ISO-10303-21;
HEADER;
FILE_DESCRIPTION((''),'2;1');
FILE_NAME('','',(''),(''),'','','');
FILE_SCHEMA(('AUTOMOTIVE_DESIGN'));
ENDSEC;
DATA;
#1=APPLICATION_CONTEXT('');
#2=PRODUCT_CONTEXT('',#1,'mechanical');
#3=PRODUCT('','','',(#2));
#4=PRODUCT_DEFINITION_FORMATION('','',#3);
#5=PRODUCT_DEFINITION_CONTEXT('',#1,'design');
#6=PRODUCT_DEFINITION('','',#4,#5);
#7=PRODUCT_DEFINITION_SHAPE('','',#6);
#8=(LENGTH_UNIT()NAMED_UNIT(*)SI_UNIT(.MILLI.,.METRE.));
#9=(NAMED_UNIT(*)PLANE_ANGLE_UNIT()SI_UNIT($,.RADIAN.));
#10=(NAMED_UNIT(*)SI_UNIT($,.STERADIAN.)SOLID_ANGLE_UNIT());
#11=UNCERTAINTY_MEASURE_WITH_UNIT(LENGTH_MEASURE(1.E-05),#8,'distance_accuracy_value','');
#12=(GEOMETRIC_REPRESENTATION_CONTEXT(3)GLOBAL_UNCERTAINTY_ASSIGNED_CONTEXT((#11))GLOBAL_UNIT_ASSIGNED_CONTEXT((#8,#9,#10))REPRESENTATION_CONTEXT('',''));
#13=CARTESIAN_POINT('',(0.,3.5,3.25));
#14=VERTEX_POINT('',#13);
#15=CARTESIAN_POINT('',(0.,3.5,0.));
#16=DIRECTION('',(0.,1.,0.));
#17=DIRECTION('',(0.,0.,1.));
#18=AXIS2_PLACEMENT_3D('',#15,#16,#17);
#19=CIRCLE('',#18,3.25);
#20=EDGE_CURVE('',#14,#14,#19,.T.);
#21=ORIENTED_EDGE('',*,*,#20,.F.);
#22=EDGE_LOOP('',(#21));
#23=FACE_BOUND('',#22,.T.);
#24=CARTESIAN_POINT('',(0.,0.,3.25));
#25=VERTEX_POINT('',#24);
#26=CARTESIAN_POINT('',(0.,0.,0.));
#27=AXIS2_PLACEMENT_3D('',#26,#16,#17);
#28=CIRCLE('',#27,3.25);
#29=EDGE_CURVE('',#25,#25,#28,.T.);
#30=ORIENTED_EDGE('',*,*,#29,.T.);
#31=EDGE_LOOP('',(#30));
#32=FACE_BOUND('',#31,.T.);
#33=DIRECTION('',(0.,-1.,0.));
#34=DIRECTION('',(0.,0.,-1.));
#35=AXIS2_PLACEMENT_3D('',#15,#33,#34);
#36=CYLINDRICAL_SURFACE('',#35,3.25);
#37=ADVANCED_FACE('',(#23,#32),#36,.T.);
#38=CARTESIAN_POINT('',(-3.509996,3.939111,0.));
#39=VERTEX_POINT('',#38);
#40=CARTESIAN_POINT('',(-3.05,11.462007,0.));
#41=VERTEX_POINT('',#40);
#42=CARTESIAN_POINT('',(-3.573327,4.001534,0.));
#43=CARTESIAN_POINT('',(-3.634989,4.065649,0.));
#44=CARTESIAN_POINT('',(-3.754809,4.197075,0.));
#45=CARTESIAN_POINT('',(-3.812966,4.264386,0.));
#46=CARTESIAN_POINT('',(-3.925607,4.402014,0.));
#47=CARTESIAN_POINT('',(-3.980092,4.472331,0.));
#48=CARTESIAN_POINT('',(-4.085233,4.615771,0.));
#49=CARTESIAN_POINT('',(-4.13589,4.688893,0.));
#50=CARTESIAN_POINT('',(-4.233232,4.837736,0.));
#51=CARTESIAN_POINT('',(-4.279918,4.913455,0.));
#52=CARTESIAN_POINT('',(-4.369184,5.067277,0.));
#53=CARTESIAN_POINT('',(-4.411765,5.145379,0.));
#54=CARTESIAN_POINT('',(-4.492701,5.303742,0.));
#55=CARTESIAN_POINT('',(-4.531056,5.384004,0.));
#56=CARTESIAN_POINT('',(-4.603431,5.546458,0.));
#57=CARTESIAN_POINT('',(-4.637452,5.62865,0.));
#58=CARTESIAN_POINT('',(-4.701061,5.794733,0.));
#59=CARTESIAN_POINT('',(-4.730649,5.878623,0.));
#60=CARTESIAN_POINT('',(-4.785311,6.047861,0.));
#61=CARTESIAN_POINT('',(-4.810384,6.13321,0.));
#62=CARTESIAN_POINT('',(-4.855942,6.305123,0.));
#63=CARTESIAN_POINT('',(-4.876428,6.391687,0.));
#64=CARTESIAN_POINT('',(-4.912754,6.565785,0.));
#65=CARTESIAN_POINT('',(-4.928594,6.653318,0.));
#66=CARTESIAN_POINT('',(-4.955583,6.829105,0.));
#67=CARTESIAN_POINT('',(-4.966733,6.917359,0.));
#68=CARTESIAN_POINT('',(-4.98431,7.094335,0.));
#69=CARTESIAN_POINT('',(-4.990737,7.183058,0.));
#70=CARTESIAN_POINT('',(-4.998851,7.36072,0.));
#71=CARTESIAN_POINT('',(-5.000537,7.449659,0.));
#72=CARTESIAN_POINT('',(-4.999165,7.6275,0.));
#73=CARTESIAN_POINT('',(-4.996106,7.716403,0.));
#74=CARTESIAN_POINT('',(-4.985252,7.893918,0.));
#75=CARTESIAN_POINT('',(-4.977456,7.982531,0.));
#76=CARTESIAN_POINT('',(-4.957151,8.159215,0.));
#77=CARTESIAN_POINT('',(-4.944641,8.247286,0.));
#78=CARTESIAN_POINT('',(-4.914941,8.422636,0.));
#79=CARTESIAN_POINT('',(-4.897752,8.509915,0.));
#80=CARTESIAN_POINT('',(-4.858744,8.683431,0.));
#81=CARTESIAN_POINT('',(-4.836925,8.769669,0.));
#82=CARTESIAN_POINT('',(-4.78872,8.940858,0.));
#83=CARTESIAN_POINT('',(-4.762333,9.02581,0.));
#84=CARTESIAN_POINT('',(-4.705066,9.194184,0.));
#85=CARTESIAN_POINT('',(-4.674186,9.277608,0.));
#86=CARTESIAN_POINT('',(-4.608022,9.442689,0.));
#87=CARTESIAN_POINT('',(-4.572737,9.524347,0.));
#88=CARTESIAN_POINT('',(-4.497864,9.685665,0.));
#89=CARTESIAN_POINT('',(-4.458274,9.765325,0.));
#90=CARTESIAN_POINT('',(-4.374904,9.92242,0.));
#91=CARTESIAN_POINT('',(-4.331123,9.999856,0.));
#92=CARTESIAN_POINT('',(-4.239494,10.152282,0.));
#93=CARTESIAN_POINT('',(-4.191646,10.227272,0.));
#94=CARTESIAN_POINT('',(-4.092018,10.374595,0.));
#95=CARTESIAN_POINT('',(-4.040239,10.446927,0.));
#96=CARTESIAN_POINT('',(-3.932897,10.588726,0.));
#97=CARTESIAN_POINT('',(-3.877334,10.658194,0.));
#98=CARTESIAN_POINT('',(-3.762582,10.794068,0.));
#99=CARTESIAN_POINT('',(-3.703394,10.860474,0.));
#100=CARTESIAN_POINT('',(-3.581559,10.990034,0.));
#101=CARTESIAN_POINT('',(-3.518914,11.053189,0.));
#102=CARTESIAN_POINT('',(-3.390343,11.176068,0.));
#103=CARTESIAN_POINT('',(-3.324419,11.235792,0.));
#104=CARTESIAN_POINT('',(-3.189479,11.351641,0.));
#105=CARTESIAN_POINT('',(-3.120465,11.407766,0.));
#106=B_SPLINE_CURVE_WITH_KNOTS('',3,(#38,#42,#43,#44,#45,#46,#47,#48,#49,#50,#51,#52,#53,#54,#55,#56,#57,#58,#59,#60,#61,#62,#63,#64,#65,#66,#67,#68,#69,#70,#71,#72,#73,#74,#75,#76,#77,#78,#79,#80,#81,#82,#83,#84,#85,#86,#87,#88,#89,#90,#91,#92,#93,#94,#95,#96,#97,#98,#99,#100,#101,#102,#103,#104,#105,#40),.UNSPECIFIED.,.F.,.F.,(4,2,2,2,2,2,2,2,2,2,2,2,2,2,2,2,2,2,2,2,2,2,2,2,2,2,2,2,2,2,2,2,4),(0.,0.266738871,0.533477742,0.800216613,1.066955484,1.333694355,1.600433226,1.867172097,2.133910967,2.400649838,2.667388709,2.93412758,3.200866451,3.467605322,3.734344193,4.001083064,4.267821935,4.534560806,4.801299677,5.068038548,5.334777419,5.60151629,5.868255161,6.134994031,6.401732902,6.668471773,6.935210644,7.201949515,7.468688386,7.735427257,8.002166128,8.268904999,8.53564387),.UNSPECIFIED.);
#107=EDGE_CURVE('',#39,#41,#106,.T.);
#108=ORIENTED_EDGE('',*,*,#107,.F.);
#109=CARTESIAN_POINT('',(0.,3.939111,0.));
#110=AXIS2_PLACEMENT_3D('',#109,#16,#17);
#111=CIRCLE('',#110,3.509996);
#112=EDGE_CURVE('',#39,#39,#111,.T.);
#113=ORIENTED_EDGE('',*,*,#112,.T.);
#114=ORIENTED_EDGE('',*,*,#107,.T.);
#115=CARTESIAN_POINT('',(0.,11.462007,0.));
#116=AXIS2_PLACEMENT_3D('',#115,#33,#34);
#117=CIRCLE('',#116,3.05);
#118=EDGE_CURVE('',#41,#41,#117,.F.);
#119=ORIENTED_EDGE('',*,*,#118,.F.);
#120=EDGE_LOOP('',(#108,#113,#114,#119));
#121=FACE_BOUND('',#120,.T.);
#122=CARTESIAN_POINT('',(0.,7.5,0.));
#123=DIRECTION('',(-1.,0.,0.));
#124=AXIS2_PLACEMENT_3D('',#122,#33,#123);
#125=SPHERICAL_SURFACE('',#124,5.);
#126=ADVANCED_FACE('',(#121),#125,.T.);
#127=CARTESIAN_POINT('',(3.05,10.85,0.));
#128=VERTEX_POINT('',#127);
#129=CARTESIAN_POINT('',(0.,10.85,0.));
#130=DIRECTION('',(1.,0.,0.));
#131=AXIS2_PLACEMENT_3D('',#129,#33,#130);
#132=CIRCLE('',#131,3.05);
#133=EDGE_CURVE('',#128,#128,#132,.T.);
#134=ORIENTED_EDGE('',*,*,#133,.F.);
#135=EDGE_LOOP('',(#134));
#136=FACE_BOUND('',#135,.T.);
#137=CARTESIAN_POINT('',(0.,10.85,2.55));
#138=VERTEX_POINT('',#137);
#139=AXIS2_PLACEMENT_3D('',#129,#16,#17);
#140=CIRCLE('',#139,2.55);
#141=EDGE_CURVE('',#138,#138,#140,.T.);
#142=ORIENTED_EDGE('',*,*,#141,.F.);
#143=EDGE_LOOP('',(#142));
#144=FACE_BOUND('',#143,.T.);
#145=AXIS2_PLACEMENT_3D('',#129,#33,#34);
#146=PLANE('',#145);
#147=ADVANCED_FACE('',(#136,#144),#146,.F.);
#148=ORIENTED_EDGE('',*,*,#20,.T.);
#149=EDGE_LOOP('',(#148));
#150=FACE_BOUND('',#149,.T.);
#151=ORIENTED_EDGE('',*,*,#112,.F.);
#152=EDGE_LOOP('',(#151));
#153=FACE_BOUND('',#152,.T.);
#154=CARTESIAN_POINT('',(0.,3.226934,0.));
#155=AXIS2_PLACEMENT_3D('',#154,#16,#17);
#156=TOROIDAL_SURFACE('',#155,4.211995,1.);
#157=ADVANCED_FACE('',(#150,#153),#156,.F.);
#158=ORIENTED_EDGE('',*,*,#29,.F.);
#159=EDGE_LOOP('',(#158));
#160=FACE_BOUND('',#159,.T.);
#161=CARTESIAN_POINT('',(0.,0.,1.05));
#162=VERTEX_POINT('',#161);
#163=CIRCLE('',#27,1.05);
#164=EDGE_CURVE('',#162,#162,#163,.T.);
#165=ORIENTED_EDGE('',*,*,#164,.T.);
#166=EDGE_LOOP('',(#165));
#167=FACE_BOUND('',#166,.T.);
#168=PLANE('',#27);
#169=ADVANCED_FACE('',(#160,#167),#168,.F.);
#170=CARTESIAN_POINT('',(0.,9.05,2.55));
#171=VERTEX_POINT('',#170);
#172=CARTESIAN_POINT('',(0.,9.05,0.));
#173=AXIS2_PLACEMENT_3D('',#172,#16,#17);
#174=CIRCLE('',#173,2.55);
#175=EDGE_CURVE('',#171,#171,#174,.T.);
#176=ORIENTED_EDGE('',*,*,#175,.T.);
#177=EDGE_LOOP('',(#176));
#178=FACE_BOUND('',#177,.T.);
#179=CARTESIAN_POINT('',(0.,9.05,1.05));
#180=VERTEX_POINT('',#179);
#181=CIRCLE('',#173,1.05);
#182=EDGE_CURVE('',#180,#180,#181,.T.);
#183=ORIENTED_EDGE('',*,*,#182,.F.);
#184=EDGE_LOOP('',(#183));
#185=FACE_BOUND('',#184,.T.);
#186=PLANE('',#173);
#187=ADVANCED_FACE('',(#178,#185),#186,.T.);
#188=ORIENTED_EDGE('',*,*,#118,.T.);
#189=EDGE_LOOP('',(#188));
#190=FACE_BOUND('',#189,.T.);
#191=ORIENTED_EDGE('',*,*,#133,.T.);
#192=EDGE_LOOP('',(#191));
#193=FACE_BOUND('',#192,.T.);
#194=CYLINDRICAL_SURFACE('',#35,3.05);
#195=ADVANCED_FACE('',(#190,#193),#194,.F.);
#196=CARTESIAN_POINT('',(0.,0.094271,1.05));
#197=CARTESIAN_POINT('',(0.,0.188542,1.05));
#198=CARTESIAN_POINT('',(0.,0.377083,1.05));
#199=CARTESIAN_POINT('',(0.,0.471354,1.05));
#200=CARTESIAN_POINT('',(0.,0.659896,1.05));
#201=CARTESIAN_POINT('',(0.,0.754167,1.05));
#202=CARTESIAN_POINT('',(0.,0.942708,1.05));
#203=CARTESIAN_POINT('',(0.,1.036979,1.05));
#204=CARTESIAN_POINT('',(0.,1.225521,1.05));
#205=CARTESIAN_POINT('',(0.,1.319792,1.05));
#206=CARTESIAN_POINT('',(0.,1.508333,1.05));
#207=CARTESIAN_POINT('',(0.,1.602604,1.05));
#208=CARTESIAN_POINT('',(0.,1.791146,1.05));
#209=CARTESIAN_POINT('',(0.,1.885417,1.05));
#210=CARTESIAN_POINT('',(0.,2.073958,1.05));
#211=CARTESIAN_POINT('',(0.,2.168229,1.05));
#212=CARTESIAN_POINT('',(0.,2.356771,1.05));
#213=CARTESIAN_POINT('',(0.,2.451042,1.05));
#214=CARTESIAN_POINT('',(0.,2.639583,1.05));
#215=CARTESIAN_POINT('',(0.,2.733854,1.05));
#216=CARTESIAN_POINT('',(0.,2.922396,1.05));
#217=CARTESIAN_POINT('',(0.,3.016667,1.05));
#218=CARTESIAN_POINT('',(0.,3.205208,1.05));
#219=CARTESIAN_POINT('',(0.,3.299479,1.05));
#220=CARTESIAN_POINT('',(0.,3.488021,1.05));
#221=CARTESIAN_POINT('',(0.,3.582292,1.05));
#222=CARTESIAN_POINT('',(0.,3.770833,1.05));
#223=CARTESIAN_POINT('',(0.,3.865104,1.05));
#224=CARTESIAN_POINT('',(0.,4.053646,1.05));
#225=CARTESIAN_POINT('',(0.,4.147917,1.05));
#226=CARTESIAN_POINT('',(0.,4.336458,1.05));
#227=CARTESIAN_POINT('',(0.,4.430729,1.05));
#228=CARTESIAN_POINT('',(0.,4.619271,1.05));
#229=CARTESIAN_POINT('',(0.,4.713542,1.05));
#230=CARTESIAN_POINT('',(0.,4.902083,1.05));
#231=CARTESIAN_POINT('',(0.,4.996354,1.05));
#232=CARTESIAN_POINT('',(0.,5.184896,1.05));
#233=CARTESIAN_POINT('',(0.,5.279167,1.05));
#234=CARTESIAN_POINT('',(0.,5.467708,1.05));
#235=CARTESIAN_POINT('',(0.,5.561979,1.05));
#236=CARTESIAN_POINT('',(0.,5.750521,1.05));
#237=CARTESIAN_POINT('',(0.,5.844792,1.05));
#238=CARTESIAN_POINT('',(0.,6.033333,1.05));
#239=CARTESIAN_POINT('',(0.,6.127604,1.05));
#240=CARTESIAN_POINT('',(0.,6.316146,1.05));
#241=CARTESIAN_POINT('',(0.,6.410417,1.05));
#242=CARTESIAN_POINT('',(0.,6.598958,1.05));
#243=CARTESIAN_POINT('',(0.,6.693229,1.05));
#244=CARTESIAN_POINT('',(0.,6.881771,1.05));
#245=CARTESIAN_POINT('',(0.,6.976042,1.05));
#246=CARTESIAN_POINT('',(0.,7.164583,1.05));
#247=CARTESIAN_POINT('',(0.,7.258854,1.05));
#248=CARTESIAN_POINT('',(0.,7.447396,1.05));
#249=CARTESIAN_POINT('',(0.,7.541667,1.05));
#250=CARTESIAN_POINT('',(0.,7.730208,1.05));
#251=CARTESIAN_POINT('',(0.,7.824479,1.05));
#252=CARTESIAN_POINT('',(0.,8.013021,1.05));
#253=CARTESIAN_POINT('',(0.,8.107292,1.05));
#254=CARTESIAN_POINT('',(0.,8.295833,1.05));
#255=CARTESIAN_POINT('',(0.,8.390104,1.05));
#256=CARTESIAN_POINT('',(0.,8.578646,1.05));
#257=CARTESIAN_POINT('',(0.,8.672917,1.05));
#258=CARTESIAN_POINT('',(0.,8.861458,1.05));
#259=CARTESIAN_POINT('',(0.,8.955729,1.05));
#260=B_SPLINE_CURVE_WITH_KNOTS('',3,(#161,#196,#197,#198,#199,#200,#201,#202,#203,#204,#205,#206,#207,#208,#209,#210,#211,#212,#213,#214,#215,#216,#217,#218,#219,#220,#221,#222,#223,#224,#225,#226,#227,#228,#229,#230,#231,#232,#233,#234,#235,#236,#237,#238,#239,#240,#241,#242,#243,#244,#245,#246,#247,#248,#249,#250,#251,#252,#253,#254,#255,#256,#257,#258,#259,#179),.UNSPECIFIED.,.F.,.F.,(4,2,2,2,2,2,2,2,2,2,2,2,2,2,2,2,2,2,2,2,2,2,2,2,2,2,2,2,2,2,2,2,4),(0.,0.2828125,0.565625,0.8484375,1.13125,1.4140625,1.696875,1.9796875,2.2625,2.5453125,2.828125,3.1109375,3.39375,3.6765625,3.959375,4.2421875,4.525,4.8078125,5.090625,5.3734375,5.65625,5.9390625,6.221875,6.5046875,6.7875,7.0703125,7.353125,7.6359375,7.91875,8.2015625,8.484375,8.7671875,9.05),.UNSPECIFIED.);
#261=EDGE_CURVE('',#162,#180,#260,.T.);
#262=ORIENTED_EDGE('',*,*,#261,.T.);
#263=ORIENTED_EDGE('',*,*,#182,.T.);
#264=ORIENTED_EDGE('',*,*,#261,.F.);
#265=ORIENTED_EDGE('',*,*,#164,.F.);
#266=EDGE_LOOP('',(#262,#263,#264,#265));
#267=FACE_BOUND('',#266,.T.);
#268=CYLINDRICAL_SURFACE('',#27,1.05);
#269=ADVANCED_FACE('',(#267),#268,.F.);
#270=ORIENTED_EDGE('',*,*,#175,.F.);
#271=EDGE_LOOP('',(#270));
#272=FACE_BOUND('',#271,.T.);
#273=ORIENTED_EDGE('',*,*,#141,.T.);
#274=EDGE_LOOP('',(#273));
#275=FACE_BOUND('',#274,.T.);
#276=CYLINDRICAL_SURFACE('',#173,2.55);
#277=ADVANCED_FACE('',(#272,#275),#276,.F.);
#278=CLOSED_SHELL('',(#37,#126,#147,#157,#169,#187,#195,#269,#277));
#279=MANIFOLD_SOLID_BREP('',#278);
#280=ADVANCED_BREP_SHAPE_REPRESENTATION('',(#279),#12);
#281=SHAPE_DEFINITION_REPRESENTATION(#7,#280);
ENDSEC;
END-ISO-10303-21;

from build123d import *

# Parameters (mm, degrees)
SKETCH1_R           = 3.2500000000000004
BOSS_EXTRUDE1_DEPTH = 3.5
SKETCH5_W           = 3.0499999999999994
SKETCH5_H           = 2.603568585765487
SKETCH7_R           = 2.5500000000000003
CUT_EXTRUDE1_DEPTH  = 1.8
SKETCH8_R           = 1.05
CUT_EXTRUDE2_DEPTH  = 12.484881366397794
FILLET1_R           = 1


with BuildPart() as part:
    # Sketch1 → Boss-Extrude1 (new body)
    with BuildSketch(Plane(origin=(0, 0, 0), x_dir=(1, 0, 0), z_dir=(0, 1, 0))):
        with Locations(Location((0, 0, 0), (0, 0, 270))):
            Circle(SKETCH1_R)
    extrude(amount=BOSS_EXTRUDE1_DEPTH)

    # Sweep2: read off the stored shape, not the designer's step
    # Sweep2 outline → Sweep2 (revolve)
    with BuildSketch(Plane.XY):
        with BuildLine():
            Line((0, 12.5), (0, 3.499999997))
            Line((0, 3.499999997), (2.999999996, 3.499999997))
            ThreePointArc((2.999999996, 3.499999997), (4.743416491, 9.081138828), (0, 12.5))
        make_face()
    revolve(axis=Axis((0, 0, 0), (0, 1, 0)))

    # Cut-Sweep2: sweep along a curve in space
    with BuildLine() as cut_sweep2_path:
        ThreePointArc((0, 3.4999999999999996, 3.000000000000002), (2.121320343559644, 3.4999999999999996, 2.121320343559644), (3.000000000000002, 3.4999999999999996, 0))
        ThreePointArc((3.000000000000002, 3.4999999999999996, 0), (2.121320343559644, 3.4999999999999996, -2.121320343559644), (0, 3.4999999999999996, -3.000000000000002))
        ThreePointArc((0, 3.4999999999999996, -3.000000000000002), (-2.121320343559644, 3.4999999999999996, -2.121320343559644), (-3.000000000000002, 3.4999999999999996, 0))
        ThreePointArc((-3.000000000000002, 3.4999999999999996, 0), (-2.121320343559644, 3.4999999999999996, 2.121320343559644), (0, 3.4999999999999996, 3.000000000000002))
    # Sketch5 → Cut-Sweep2 (sweep, cut)
    with BuildSketch(Plane.XY):
        with Locations((1.5249999999999997, 12.151784292882743)):
            Rectangle(SKETCH5_W, SKETCH5_H)
    sweep(path=cut_sweep2_path.line, mode=Mode.SUBTRACT)

    # Sketch7 → Cut-Extrude1 (cut)
    with BuildSketch(Plane(origin=(0, 10.85, 0), x_dir=(1, 0, 0), z_dir=(0, 1, 0))):
        with Locations(Location((0, 0, 0), (0, 0, 270))):
            Circle(SKETCH7_R)
    extrude(amount=-CUT_EXTRUDE1_DEPTH, mode=Mode.SUBTRACT)

    # Sketch8 → Cut-Extrude2 (cut, through all)
    with BuildSketch(Plane(origin=(0, 9.05, 0), x_dir=(1, 0, 0), z_dir=(0, 1, 0))):
        with Locations(Location((0, 0, 0), (0, 0, 270))):
            Circle(SKETCH8_R)
    extrude(amount=-CUT_EXTRUDE2_DEPTH, mode=Mode.SUBTRACT)

    # Fillet1
    # the kernel refuses this fillet: 1 mm, written as the material it adds along each edge
    with BuildSketch(Plane(origin=(0, 3.4999999970000006, 0), x_dir=(1, 0, 0), z_dir=(0, 0, 1))) as fillet1_piece_1:
        with BuildLine():
            CenterArc((4.21199518408407, -0.27306640979926655), FILLET1_R, 134.58762076250994, 29.565561163496568)
            ThreePointArc((3.5099959867224584, 0.4391113256738759), (3.2623943067411867, 0.21096537839129237), (2.9999999959999997, 0))
            Line((2.9999999959999997, 0), (3.250000000000001, 2.99999936e-09))
        make_face()
    revolve(axis=Axis((0, 3.4999999970000006, 0), (0, 1, 0)))


solid = part.part
